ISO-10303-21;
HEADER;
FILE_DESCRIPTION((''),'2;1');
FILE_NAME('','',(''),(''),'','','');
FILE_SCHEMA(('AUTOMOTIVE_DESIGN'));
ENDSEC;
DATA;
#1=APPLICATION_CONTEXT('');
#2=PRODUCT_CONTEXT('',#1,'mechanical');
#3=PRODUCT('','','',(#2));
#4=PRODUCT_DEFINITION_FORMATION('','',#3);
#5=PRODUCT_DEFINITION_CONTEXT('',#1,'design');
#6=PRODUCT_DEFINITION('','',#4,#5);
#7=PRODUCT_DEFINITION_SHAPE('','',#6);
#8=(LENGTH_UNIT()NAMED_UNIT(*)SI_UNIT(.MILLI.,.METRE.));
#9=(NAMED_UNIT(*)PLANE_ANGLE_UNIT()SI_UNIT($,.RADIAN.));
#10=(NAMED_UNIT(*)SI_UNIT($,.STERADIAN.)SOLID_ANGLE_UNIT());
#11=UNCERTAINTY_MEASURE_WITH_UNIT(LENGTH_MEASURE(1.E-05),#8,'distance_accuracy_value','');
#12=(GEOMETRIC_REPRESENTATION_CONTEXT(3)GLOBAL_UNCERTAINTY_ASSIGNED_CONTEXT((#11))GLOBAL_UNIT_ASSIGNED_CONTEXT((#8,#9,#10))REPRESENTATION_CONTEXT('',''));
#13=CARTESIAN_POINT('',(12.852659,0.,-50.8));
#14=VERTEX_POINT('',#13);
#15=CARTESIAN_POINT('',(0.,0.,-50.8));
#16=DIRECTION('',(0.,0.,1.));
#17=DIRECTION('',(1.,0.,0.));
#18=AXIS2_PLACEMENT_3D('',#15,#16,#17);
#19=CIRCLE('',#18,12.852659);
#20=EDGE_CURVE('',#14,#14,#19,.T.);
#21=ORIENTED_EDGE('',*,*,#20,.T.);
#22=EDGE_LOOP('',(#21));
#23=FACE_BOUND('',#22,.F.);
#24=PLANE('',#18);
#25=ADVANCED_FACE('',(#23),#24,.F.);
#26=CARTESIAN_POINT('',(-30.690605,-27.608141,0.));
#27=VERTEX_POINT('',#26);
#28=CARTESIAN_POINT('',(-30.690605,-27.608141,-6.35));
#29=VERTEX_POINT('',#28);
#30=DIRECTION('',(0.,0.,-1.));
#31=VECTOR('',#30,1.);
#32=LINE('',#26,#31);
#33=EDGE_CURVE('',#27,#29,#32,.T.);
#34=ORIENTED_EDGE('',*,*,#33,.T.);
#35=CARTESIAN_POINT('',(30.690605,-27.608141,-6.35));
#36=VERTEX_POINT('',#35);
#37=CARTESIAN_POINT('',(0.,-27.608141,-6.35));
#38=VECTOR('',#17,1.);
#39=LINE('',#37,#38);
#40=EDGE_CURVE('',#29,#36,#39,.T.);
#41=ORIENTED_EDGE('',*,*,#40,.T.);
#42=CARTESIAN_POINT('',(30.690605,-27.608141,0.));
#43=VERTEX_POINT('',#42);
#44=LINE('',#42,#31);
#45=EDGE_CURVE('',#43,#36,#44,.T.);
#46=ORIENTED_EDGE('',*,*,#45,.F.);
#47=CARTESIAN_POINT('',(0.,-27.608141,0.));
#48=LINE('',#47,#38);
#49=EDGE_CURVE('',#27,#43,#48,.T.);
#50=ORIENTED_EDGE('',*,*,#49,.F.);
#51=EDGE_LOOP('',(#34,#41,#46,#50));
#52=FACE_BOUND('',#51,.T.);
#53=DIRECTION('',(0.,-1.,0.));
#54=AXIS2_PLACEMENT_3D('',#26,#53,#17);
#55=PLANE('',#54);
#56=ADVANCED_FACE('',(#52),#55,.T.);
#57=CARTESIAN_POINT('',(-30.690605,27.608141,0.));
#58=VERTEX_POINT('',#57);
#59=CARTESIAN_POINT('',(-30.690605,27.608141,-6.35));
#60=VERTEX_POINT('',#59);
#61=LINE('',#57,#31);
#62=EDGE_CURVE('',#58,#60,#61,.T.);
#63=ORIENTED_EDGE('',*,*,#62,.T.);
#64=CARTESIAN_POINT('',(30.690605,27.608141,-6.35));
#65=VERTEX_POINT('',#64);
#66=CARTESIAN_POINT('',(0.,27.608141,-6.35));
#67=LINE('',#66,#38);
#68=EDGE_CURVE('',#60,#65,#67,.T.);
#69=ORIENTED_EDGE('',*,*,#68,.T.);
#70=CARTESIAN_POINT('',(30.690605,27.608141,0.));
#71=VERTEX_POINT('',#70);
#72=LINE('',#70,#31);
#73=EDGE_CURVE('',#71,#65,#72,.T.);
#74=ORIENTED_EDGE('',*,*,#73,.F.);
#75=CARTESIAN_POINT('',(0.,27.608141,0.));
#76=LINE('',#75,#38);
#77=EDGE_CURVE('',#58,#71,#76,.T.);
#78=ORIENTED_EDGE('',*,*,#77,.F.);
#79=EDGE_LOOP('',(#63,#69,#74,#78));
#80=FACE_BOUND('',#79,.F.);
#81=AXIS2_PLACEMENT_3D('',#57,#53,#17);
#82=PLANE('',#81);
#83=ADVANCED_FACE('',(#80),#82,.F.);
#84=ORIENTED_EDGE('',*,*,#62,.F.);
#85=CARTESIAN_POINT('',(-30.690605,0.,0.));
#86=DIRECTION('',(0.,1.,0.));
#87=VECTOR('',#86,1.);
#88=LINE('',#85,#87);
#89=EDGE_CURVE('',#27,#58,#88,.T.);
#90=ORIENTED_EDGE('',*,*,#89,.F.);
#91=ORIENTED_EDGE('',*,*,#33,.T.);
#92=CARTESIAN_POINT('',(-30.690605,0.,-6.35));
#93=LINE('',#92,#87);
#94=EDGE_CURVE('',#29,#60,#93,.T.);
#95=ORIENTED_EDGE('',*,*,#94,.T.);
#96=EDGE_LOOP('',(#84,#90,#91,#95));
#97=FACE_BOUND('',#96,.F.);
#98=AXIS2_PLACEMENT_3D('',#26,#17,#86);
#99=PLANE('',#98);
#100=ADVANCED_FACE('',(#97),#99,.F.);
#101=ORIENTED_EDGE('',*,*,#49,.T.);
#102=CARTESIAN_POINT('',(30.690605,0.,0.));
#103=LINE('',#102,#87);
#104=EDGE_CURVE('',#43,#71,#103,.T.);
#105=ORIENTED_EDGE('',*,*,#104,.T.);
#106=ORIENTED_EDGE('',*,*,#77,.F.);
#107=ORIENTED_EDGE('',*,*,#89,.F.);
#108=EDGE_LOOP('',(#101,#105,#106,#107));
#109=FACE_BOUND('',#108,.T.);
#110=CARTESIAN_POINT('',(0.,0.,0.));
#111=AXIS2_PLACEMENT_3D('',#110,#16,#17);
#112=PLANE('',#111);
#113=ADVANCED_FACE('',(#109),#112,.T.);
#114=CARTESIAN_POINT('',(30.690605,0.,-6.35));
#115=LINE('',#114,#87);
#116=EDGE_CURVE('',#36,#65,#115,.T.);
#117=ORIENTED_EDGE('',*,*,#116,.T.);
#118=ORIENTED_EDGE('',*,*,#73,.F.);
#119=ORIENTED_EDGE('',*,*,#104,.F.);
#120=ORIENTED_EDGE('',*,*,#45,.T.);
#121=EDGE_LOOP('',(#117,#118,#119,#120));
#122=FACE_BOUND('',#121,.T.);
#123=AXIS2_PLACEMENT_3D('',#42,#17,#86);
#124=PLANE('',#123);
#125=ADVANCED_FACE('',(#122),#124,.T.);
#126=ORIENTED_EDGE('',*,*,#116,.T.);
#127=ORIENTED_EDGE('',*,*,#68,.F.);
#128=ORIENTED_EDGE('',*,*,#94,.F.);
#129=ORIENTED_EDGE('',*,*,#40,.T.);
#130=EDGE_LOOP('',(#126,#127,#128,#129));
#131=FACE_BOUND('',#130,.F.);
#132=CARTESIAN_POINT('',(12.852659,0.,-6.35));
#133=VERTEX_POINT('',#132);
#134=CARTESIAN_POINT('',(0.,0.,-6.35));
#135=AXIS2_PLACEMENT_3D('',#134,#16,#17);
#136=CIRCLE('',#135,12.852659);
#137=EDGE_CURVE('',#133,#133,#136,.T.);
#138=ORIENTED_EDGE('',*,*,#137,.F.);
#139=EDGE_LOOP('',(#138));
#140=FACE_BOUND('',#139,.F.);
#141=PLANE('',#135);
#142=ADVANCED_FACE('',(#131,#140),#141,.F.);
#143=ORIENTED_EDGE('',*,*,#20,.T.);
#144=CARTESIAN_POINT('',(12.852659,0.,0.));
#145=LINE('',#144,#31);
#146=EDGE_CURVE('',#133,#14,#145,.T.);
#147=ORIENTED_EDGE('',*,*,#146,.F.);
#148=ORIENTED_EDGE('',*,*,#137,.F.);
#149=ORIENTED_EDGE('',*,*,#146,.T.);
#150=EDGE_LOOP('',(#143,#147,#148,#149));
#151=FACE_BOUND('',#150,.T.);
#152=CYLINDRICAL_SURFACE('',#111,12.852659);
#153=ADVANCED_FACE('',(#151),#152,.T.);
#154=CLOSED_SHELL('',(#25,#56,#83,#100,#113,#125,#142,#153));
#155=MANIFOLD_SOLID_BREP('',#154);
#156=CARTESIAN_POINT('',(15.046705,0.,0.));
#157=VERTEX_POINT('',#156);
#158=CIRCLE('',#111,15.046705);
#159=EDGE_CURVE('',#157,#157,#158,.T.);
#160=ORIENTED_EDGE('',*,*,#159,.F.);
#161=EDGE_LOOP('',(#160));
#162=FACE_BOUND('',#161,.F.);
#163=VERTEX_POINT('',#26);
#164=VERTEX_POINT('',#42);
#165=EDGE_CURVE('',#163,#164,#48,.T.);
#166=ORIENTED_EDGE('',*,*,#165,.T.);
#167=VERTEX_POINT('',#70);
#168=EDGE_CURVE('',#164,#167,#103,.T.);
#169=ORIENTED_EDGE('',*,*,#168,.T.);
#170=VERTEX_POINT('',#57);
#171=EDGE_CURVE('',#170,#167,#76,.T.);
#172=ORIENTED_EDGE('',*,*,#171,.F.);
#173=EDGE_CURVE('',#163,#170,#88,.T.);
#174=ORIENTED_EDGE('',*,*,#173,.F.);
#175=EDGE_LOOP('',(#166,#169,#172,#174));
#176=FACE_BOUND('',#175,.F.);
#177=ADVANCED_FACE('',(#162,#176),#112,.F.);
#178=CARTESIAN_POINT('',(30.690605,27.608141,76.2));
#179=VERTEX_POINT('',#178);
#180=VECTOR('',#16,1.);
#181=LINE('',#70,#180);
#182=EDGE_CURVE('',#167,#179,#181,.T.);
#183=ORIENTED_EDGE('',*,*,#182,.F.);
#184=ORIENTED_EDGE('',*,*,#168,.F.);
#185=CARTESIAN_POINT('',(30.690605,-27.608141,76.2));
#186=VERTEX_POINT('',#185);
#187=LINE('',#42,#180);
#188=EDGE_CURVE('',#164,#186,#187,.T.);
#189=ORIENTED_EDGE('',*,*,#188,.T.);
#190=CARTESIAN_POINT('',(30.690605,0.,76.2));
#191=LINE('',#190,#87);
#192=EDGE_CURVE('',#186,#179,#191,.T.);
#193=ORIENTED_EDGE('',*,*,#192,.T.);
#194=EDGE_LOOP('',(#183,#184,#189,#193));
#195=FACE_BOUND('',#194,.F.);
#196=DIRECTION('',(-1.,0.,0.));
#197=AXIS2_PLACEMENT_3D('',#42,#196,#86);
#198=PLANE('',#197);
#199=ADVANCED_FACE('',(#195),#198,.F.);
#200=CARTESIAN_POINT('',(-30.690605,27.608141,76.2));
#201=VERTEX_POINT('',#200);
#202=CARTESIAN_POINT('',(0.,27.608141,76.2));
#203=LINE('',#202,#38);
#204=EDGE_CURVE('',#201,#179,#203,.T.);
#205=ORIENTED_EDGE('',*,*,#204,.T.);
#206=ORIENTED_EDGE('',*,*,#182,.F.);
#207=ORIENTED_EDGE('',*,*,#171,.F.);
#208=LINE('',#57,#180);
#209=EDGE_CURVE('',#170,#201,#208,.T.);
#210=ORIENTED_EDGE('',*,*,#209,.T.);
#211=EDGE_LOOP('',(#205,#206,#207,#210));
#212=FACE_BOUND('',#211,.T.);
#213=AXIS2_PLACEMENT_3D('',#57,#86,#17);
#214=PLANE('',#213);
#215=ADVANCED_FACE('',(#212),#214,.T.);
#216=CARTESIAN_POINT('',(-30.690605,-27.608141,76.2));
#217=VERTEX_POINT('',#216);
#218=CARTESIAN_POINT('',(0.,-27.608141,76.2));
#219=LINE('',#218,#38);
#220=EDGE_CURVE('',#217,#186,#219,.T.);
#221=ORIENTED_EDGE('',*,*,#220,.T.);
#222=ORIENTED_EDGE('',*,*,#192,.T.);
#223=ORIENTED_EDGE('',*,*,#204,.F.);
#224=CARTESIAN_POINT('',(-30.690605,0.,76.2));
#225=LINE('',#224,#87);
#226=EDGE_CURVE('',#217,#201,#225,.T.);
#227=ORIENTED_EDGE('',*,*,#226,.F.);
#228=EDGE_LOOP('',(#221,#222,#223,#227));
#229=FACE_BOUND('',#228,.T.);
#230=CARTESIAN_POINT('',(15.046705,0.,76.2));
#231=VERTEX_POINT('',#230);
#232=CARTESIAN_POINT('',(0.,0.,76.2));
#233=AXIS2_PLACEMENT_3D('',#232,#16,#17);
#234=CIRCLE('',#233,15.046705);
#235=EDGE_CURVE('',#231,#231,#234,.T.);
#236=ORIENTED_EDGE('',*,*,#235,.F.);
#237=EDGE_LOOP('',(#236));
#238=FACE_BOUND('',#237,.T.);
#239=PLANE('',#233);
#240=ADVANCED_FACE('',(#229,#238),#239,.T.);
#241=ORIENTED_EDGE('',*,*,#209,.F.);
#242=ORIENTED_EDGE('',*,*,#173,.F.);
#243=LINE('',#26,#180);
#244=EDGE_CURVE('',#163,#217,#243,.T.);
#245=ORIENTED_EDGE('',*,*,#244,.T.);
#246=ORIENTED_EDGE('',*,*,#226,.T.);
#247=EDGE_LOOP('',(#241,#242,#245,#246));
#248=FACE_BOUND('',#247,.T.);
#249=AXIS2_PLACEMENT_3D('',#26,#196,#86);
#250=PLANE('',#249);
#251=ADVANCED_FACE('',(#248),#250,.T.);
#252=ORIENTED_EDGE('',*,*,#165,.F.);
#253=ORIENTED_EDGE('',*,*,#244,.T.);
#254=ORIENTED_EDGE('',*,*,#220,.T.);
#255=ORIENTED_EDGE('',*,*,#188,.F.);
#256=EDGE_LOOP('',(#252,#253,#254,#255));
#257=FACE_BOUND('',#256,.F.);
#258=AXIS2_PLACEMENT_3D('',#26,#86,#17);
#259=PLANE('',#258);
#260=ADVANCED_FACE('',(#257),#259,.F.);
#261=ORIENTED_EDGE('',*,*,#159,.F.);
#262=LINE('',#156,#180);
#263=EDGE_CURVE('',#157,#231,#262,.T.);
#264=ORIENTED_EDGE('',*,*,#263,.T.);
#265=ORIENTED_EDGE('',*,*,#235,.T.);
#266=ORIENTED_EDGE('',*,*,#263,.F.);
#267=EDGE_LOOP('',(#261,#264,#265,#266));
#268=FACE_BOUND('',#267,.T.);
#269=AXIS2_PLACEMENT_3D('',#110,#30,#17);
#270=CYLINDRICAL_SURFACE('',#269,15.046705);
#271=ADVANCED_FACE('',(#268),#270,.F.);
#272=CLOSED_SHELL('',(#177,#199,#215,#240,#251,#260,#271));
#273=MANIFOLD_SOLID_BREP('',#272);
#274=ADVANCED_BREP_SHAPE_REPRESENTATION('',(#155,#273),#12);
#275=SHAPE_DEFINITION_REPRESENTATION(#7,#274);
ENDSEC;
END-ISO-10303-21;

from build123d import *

# Parameters (mm, degrees)
F0_W     = 61.3812096417
F0_H     = 55.2162826061
F0_R     = 15.0467047404
F1_DEPTH = 76.2
F0_R_2   = 12.8526590503
F2_DEPTH = 50.8
F3_DEPTH = 6.35


with BuildPart() as f1:
    # F0 (on Top) → F1 (new body)
    with BuildSketch(Plane.XY):
        Rectangle(F0_W, F0_H)
        Circle(F0_R, mode=Mode.SUBTRACT)
    extrude(amount=F1_DEPTH)


with BuildPart() as f2:
    # F0 (on Top) → F2 (new body)
    with BuildSketch(Plane.XY):
        Circle(F0_R_2)
    extrude(amount=-F2_DEPTH)

    # F0 (on Top) → F3 (join)
    with BuildSketch(Plane.XY):
        Rectangle(F0_W, F0_H)
        Circle(F0_R, mode=Mode.SUBTRACT)
        Circle(F0_R)
        Circle(F0_R_2, mode=Mode.SUBTRACT)
    extrude(amount=-F3_DEPTH)


solid = Compound([f1.part, f2.part])
